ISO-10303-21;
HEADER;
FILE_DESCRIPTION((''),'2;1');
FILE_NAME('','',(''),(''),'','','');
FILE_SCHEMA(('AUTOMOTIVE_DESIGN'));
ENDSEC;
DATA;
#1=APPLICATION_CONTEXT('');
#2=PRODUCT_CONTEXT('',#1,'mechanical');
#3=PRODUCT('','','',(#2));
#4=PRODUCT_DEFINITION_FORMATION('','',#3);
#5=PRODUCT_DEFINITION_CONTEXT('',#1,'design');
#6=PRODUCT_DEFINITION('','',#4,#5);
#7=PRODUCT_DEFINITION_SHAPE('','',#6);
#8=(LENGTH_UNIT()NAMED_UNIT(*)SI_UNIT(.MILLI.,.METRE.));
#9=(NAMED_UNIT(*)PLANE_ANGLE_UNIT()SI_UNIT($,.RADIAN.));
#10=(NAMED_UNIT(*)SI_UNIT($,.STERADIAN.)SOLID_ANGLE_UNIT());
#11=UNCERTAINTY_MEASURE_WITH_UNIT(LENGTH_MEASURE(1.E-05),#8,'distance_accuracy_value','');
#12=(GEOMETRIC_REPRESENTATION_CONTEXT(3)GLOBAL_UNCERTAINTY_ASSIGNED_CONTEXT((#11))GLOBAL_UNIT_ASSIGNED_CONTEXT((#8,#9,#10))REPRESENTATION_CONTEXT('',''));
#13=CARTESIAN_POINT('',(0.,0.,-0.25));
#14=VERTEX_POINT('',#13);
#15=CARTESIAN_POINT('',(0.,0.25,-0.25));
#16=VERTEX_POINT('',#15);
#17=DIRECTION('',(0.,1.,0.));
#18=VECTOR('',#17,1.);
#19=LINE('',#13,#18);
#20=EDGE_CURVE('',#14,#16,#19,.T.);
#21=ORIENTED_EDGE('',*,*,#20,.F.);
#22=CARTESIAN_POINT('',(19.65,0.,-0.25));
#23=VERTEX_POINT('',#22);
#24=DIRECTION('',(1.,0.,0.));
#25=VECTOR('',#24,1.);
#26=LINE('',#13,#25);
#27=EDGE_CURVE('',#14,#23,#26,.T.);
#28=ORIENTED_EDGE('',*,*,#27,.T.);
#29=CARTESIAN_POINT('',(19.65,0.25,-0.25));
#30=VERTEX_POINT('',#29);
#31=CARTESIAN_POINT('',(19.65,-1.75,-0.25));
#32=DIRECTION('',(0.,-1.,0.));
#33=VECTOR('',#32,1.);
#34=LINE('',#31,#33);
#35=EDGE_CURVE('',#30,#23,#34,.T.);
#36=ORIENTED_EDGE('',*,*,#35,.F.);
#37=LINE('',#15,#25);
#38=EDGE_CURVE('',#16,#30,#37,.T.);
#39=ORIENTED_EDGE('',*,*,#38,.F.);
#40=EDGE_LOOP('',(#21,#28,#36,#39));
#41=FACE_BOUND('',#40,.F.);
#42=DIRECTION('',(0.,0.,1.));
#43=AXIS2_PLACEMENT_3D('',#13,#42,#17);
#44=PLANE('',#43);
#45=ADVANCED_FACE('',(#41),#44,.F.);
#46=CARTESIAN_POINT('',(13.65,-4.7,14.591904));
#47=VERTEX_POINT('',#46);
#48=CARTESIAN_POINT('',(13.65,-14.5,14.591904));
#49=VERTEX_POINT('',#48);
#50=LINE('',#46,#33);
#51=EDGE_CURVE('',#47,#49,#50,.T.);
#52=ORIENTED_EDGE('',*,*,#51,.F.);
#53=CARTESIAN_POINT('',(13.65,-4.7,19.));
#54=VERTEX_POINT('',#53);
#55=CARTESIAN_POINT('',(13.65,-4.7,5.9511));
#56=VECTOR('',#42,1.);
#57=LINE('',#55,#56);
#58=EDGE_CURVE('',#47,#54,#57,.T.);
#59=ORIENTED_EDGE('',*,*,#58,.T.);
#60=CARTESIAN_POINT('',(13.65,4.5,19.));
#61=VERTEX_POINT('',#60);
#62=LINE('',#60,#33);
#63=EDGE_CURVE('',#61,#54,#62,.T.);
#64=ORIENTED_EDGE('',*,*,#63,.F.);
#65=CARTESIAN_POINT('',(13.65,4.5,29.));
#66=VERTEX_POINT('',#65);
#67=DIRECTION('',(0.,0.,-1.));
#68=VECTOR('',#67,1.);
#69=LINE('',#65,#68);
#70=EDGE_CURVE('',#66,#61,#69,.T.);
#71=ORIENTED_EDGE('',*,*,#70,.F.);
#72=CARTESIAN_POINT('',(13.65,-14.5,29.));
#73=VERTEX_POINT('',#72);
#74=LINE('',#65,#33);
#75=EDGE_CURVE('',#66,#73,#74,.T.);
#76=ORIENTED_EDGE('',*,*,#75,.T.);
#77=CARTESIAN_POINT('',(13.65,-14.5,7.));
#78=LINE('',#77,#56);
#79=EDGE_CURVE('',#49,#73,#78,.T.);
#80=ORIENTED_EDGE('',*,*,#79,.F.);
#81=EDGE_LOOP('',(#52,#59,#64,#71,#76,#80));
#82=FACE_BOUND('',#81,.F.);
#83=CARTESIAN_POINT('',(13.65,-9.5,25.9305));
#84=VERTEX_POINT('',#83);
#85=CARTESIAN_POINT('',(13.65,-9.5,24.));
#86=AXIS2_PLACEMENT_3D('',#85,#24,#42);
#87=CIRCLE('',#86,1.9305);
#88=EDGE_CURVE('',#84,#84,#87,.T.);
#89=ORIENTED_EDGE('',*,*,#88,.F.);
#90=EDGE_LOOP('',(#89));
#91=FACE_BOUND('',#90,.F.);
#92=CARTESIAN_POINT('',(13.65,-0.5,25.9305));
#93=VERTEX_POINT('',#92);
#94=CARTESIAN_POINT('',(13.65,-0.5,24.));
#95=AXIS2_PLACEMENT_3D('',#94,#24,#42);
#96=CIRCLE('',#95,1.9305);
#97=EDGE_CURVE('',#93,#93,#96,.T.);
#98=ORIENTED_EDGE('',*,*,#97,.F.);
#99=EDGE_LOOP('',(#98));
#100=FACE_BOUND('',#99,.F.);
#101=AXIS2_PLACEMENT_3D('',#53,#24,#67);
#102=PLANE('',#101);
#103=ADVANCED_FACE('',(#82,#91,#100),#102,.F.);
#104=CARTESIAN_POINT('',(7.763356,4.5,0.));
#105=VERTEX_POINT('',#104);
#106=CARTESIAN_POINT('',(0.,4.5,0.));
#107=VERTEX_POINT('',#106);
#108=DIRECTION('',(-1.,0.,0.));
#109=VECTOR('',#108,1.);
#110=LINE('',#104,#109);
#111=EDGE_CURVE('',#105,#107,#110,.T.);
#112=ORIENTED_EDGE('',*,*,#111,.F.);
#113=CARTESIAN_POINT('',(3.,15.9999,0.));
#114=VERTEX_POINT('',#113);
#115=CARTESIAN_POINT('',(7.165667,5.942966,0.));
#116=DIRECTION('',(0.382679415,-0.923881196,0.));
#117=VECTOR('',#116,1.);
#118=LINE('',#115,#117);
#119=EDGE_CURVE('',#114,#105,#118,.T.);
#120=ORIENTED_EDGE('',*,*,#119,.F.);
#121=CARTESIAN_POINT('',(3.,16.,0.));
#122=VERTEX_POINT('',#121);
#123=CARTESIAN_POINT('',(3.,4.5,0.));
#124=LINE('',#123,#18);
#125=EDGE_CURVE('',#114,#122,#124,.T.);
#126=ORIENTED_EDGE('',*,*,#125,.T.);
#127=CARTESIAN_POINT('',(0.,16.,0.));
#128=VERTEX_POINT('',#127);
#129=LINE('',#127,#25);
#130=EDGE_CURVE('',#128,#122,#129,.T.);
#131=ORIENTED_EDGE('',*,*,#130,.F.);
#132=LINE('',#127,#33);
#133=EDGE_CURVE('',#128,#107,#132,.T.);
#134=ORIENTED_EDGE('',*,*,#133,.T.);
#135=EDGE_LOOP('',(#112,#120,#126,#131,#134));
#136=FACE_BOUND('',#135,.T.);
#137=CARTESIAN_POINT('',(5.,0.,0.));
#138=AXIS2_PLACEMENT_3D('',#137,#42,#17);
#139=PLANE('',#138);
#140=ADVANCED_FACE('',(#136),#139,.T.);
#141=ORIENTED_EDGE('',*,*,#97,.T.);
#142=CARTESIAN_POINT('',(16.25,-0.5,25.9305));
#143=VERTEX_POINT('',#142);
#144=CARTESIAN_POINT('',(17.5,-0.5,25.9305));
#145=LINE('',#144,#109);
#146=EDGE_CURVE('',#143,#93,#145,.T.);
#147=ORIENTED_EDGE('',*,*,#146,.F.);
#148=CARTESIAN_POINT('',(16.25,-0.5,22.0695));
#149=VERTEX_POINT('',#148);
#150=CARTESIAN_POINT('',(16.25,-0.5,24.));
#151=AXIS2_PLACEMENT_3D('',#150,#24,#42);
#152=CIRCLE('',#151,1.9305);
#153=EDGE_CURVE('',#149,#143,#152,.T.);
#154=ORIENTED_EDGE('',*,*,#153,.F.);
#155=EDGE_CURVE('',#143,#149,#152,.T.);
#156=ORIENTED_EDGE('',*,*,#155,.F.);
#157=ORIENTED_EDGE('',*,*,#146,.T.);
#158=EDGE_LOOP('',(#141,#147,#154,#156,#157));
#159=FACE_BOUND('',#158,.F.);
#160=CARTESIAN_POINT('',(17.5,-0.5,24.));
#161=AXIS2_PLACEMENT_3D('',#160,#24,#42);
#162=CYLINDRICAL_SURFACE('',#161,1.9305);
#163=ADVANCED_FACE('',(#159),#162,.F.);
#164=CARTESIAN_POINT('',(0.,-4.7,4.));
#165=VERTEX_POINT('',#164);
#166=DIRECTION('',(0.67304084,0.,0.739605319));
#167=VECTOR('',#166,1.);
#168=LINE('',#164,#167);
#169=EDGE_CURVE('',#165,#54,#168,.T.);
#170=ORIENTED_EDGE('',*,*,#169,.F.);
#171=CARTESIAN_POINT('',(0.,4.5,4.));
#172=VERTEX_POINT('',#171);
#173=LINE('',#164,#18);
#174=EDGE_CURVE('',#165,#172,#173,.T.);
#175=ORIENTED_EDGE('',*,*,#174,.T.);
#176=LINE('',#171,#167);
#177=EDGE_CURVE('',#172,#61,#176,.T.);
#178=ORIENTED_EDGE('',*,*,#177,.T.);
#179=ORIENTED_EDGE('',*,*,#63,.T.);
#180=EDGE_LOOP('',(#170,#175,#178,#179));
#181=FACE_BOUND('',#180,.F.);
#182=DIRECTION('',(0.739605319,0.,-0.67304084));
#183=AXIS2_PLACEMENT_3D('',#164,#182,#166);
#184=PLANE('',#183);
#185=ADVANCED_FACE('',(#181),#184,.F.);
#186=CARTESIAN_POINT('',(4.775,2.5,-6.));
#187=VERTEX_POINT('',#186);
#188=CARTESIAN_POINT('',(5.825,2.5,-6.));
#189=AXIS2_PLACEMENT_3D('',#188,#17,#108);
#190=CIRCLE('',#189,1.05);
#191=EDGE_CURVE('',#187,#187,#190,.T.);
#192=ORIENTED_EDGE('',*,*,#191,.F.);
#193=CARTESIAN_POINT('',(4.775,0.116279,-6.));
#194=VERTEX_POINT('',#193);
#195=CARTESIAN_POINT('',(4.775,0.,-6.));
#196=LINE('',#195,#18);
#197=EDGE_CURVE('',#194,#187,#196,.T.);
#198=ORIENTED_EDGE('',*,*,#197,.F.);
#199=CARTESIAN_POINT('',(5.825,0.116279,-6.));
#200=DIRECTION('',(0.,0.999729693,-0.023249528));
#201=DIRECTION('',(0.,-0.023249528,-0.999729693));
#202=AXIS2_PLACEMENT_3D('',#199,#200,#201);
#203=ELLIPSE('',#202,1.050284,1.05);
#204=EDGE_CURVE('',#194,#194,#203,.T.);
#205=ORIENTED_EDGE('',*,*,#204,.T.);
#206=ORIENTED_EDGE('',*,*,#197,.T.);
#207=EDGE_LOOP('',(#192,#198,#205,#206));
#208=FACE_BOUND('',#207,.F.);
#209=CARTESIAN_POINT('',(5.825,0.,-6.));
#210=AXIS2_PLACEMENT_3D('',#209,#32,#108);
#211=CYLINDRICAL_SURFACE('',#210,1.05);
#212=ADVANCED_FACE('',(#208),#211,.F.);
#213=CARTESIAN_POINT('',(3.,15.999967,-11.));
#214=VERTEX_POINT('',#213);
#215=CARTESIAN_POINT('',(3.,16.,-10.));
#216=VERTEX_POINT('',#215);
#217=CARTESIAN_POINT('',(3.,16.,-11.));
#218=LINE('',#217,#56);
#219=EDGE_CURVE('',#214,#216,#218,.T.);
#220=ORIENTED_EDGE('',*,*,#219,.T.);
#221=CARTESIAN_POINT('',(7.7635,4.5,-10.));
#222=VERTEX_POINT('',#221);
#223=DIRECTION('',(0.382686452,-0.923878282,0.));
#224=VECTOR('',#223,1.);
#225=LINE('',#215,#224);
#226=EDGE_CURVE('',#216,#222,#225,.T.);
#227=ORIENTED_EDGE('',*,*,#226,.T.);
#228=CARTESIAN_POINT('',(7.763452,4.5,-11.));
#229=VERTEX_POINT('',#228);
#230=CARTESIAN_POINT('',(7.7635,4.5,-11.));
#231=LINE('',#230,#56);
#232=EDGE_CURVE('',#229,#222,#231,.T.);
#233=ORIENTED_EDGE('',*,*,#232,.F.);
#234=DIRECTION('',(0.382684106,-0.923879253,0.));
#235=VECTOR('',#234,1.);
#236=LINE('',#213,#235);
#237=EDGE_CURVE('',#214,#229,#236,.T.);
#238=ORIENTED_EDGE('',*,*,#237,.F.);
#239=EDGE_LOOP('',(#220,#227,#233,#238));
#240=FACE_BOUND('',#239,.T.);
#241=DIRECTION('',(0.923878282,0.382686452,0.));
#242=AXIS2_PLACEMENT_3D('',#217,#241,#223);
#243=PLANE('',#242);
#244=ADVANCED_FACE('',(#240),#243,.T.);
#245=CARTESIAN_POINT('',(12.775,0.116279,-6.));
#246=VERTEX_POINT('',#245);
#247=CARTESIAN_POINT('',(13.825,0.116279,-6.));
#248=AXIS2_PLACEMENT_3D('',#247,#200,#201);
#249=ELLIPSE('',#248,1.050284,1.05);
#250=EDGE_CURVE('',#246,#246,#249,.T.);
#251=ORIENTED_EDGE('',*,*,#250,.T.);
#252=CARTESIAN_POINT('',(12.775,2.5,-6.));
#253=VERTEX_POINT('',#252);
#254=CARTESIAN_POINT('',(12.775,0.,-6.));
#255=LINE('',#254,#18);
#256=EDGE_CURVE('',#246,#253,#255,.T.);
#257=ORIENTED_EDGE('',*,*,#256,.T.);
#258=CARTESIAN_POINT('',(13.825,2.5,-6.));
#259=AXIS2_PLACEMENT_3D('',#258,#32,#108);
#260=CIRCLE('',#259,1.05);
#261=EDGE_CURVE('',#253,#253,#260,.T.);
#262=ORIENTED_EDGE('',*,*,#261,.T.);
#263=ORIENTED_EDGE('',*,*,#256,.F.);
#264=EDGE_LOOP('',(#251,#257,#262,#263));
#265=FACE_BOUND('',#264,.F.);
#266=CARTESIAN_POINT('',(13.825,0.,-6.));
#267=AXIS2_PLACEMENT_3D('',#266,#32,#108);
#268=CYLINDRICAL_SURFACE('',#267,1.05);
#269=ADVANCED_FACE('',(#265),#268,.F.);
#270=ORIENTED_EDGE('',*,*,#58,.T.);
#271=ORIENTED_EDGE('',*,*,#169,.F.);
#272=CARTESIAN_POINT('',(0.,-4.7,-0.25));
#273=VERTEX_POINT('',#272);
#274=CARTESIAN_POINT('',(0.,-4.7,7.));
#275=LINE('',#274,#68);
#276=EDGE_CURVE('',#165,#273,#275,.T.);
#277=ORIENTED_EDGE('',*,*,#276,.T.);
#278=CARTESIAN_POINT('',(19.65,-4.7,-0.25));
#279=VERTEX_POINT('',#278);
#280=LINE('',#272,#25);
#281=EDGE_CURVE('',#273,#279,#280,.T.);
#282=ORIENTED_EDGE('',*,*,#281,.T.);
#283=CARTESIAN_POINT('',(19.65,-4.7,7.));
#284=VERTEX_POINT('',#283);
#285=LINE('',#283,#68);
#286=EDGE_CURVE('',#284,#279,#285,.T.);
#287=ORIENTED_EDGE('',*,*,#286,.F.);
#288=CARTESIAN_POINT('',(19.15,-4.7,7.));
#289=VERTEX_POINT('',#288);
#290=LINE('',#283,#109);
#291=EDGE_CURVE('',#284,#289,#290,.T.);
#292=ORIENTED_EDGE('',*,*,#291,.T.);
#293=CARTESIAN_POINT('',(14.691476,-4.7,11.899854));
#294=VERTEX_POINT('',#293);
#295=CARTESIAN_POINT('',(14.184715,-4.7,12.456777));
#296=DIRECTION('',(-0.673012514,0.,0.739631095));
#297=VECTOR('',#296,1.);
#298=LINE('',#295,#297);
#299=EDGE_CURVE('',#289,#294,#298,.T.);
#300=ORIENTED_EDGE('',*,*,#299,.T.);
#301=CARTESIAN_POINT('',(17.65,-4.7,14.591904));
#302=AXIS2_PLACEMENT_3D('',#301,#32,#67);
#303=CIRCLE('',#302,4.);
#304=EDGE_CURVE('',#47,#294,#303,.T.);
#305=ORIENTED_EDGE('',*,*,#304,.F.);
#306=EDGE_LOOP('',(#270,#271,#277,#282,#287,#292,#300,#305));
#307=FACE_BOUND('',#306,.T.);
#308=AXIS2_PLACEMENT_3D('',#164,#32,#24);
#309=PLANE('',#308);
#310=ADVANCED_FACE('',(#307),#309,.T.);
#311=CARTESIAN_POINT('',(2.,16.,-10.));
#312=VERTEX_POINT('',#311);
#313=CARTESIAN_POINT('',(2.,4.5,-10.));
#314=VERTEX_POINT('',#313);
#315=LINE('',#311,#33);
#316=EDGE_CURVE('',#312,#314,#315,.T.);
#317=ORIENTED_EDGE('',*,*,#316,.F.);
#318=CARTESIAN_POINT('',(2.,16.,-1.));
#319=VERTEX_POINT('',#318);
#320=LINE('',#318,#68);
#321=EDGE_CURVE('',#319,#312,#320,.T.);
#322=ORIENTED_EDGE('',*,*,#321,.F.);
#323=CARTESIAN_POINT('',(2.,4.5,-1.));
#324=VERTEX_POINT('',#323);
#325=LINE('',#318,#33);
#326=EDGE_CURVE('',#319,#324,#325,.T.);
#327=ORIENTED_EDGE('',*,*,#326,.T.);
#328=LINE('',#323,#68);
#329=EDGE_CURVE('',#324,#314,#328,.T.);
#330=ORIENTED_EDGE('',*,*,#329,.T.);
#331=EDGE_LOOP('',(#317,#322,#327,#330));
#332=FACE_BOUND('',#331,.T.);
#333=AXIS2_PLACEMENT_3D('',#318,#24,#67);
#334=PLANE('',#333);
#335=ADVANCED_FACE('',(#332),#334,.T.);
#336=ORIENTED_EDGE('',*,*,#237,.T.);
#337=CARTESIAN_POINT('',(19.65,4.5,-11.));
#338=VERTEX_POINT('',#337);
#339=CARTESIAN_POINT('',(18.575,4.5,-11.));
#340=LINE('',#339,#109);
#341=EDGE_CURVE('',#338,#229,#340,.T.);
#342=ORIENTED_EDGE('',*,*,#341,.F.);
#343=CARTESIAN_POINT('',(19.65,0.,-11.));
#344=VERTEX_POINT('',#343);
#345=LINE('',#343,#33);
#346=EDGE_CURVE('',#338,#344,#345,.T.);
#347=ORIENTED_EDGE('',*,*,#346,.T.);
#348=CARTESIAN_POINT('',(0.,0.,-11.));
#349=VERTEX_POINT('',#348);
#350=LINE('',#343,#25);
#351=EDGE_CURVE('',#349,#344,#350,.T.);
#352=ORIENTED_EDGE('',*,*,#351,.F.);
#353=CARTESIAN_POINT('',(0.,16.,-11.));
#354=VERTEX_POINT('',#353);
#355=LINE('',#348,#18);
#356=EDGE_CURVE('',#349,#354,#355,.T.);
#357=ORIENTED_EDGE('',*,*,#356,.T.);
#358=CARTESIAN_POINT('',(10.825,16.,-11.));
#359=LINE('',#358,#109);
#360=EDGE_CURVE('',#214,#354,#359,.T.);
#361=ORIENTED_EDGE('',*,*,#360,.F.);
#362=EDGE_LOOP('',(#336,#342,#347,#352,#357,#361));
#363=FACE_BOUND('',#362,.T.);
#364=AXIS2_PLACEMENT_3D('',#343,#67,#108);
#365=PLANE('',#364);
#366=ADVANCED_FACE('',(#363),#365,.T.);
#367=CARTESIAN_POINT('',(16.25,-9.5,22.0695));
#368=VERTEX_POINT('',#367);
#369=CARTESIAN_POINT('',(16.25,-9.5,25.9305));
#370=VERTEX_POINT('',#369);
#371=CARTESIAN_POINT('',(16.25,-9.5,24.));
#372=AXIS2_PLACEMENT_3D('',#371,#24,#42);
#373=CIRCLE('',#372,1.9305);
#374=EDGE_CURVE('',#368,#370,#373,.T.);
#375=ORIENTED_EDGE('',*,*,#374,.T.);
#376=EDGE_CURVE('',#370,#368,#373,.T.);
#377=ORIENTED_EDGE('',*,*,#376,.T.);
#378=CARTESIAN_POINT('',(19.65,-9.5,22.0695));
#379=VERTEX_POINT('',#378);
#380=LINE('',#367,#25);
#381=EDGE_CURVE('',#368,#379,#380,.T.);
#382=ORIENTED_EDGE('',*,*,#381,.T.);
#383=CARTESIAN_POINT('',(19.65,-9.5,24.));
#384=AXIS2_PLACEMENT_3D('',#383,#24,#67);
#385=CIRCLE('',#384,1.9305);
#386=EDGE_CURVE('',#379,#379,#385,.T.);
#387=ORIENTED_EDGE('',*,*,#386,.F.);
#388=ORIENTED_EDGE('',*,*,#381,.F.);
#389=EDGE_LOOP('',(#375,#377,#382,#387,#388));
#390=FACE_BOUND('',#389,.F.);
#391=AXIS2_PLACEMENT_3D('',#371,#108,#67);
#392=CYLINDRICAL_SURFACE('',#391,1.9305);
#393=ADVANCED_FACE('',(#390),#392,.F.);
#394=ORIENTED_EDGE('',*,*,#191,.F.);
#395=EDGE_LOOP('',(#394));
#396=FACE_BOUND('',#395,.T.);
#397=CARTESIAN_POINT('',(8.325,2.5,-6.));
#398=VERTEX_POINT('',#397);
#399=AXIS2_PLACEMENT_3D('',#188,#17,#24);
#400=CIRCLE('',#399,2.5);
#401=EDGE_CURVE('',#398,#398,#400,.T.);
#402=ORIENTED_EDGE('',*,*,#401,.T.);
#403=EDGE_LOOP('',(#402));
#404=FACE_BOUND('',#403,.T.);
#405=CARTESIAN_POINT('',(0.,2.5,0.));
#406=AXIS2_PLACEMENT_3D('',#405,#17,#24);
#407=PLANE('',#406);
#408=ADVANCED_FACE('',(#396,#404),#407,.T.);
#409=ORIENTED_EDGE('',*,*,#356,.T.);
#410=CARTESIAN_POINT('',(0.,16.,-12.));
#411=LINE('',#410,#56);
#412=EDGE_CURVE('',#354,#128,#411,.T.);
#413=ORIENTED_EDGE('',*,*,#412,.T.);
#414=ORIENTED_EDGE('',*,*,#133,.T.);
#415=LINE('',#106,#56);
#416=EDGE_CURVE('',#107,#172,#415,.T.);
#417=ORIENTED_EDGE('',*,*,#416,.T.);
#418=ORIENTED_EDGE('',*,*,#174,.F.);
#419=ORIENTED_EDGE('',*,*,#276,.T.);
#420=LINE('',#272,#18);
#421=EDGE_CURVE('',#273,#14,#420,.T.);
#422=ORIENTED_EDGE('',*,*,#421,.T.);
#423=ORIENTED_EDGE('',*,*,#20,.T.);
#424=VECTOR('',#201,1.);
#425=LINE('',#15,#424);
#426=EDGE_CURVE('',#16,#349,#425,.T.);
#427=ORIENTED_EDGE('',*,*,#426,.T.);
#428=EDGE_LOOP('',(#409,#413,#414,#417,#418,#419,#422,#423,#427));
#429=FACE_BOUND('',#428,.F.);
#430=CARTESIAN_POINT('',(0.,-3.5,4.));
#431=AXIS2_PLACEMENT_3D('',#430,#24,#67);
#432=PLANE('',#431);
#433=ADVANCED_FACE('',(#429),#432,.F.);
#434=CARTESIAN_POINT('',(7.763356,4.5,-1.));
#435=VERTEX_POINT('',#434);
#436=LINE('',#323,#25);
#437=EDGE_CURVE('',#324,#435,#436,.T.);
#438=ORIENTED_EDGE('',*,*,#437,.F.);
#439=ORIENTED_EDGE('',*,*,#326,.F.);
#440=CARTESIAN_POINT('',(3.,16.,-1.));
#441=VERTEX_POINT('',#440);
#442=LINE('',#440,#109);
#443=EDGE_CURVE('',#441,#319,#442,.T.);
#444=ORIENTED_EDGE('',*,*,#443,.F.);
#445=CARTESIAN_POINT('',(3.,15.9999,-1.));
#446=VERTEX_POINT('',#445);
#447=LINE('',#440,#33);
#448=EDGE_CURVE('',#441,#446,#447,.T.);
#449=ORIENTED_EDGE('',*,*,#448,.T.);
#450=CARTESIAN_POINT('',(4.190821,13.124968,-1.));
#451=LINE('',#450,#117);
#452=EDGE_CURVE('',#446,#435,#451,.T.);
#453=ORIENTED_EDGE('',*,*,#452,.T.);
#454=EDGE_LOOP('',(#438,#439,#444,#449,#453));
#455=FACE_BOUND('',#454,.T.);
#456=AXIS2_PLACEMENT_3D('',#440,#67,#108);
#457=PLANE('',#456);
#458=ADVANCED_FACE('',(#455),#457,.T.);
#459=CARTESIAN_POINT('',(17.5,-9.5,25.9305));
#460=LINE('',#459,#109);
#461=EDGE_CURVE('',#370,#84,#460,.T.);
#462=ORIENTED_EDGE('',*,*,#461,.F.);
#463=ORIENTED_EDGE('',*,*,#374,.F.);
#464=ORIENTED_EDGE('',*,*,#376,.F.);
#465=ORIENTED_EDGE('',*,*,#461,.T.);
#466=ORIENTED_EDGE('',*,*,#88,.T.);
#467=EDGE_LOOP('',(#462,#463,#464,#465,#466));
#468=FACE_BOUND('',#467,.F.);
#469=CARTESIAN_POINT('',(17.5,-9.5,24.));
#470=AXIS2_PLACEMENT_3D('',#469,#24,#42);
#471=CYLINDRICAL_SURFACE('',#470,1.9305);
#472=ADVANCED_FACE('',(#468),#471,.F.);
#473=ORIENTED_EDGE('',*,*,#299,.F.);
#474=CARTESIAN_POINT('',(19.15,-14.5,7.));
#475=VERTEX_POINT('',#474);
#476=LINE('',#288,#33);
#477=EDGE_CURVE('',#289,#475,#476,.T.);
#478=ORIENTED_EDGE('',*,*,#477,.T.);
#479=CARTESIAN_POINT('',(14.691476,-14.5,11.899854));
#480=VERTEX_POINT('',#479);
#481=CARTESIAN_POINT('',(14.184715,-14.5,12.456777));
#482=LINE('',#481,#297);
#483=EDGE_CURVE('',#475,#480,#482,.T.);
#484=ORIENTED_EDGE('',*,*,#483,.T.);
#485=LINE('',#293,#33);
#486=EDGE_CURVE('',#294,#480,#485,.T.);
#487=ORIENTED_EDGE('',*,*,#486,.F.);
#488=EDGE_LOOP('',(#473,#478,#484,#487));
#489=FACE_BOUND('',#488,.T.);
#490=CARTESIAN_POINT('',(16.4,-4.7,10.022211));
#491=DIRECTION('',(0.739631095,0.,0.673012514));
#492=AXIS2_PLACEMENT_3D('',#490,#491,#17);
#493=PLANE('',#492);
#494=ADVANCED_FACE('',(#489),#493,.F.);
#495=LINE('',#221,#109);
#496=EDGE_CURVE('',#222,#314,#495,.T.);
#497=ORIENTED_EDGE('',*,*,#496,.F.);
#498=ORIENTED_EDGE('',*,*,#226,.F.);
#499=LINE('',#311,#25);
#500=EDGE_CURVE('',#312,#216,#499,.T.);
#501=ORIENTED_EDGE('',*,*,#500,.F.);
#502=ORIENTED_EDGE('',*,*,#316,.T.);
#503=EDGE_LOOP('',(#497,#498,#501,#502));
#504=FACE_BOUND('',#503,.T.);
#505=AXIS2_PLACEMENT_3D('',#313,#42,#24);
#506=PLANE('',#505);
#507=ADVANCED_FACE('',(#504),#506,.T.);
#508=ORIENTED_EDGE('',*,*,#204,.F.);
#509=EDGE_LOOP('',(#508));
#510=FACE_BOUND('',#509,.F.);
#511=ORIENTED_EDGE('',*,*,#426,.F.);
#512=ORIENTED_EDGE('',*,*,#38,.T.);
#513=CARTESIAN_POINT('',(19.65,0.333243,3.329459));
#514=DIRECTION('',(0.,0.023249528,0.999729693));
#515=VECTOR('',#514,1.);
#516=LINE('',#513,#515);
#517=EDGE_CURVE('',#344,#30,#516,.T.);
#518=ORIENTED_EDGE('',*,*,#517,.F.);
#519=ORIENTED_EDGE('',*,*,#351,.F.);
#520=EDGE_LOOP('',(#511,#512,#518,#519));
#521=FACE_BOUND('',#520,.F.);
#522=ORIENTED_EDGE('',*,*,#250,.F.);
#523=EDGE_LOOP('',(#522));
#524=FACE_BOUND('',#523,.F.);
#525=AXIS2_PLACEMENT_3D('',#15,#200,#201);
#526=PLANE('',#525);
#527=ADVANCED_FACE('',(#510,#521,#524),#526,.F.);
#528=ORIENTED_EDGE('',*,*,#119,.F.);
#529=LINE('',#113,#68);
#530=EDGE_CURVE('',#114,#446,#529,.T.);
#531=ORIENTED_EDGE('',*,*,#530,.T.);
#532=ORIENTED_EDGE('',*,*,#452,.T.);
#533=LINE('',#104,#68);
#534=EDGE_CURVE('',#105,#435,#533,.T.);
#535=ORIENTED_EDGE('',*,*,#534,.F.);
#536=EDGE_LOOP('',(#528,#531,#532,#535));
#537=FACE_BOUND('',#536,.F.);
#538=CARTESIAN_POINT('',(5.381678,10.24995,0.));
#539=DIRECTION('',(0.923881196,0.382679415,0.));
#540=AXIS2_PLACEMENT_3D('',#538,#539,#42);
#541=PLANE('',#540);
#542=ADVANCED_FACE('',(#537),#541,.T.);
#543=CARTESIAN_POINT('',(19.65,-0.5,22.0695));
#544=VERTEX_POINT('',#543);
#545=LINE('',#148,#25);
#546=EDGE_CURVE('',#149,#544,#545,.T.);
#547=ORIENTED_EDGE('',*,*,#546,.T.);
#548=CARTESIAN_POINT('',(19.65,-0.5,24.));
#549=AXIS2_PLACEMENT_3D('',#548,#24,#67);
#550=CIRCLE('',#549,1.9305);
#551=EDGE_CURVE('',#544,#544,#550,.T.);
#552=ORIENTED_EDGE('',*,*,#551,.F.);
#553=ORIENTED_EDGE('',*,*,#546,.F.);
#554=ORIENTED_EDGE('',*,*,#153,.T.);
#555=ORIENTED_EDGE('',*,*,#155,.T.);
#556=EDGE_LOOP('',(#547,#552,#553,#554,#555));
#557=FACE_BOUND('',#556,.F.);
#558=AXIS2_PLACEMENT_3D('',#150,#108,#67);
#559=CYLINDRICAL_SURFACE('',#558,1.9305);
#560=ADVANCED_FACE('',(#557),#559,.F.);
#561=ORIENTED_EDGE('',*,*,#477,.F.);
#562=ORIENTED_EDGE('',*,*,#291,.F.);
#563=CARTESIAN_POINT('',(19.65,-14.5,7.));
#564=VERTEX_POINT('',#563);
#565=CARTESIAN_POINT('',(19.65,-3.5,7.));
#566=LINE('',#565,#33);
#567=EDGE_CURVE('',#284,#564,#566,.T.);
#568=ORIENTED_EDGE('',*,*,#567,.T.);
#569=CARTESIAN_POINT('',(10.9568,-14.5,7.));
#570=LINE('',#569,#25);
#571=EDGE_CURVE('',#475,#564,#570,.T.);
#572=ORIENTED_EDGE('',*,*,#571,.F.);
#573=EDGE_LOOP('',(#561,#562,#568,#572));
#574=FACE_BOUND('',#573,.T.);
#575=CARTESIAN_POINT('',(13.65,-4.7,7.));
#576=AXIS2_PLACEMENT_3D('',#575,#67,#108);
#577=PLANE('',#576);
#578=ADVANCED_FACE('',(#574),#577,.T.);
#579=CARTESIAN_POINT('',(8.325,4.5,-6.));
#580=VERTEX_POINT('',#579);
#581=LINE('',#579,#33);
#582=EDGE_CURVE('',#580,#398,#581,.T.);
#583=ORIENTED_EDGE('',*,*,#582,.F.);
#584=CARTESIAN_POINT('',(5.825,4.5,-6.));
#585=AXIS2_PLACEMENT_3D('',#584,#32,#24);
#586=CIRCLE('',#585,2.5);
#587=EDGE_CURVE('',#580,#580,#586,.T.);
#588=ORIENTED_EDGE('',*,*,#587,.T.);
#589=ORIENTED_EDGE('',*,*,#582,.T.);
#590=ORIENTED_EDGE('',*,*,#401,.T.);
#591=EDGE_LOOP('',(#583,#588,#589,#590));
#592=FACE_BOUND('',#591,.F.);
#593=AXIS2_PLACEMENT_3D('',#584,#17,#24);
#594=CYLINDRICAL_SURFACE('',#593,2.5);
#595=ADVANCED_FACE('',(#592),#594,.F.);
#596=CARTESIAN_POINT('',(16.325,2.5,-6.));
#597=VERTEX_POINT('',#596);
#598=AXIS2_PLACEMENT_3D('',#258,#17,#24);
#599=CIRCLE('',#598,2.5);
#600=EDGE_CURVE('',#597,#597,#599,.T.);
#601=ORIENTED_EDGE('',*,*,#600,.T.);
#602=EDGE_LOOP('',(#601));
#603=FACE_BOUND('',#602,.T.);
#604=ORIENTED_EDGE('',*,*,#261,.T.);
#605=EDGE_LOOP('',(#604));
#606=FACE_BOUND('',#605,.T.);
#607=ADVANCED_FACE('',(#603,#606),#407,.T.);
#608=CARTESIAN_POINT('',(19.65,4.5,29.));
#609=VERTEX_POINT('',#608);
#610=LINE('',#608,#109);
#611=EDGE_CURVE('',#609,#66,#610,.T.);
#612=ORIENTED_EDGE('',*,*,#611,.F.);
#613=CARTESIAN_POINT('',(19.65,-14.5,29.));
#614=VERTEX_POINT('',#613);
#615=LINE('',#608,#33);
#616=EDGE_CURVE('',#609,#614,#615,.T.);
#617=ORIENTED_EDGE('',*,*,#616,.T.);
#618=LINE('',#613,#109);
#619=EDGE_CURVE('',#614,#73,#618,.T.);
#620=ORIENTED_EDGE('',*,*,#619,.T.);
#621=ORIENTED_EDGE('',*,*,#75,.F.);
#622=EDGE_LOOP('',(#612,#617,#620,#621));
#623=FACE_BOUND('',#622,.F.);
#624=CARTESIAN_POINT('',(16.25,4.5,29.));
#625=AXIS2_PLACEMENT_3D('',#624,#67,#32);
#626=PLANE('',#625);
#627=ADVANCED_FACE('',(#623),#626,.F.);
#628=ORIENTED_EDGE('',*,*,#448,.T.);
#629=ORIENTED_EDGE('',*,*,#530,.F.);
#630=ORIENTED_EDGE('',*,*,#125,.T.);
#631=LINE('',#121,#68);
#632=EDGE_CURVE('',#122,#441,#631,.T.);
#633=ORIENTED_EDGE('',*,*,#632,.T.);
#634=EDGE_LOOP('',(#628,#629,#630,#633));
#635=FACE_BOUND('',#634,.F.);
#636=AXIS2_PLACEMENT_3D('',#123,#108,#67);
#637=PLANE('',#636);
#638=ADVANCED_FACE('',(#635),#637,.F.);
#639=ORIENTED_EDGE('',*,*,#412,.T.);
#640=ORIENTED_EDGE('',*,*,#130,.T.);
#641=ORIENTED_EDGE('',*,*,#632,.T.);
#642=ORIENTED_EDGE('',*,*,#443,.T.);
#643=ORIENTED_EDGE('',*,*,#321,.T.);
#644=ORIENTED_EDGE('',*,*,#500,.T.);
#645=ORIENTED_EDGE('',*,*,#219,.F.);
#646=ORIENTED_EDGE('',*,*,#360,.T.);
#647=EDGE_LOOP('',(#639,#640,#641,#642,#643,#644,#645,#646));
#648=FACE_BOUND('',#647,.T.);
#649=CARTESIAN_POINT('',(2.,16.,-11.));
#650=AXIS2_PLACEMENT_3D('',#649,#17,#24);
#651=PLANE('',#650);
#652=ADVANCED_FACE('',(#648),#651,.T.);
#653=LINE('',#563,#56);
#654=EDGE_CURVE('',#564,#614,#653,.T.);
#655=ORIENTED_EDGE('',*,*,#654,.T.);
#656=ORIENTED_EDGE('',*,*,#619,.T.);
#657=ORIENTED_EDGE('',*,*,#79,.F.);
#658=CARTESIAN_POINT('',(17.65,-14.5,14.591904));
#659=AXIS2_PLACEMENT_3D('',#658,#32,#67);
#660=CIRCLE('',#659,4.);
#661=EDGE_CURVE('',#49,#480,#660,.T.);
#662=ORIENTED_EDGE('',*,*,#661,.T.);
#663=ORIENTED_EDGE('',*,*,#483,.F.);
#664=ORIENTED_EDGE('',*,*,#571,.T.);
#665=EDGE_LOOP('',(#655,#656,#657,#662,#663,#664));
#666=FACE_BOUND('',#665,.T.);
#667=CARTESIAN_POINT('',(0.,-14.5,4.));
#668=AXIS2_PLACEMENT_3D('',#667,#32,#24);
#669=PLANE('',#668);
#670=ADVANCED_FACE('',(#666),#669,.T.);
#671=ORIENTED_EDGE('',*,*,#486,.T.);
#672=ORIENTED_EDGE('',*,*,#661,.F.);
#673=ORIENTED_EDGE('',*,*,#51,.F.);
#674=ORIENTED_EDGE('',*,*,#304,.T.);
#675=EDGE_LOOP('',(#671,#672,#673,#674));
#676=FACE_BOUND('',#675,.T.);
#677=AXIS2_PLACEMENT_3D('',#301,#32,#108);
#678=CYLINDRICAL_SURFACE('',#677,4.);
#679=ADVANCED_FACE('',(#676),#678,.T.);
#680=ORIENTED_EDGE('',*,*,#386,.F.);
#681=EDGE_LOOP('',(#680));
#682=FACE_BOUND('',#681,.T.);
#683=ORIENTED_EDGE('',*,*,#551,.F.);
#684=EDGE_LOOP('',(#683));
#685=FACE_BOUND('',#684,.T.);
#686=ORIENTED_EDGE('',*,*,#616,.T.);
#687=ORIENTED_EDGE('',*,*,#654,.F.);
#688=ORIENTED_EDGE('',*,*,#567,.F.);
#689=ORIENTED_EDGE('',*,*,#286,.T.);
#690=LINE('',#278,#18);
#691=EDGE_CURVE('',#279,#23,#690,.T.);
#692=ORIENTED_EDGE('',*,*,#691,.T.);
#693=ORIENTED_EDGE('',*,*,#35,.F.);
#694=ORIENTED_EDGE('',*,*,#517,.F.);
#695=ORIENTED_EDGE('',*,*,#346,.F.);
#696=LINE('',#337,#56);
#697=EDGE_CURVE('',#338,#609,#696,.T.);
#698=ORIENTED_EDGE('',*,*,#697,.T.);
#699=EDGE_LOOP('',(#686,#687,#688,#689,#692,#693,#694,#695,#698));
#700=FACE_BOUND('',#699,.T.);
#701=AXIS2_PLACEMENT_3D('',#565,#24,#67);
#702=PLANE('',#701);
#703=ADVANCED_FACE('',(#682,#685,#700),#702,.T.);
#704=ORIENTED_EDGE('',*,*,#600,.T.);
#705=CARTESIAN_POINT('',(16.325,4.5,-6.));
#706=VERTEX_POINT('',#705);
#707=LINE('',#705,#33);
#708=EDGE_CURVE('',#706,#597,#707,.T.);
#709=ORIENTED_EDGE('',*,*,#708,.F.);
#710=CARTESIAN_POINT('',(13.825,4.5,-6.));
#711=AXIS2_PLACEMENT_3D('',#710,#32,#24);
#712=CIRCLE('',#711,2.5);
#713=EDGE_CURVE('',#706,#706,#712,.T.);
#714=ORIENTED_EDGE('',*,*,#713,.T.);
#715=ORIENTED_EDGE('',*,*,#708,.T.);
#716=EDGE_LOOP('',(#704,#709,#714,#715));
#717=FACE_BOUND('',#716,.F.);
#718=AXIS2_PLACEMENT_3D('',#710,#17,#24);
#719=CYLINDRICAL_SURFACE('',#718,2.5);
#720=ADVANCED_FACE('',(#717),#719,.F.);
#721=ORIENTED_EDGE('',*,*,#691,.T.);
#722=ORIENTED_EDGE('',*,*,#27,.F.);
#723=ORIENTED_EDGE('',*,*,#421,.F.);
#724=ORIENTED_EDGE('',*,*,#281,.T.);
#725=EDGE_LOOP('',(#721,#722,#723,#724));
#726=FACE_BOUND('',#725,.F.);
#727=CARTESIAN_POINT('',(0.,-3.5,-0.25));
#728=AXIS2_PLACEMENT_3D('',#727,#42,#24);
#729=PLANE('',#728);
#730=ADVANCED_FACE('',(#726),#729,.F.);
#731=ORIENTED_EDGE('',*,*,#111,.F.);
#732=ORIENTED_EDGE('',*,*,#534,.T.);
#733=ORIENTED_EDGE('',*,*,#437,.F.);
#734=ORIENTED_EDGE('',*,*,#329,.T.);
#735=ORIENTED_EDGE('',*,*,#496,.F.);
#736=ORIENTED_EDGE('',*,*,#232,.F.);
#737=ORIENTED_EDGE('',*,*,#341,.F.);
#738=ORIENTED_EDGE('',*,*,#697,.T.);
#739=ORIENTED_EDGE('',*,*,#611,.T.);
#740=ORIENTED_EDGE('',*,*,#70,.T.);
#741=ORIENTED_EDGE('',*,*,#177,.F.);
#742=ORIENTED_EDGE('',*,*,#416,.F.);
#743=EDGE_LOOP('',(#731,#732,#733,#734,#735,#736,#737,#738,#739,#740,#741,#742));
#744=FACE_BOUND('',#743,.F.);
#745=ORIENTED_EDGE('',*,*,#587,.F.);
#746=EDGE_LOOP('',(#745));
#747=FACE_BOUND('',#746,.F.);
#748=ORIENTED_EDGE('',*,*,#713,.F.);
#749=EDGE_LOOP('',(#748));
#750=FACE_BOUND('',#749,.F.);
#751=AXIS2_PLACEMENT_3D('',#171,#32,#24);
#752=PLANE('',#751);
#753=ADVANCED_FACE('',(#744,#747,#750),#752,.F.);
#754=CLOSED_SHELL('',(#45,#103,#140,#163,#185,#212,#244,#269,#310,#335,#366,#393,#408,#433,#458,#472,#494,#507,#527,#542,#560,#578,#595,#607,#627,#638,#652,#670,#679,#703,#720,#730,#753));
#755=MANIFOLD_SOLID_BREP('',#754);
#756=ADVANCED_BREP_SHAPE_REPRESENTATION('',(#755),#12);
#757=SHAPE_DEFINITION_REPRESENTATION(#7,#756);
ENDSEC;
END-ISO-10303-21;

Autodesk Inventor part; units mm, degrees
ref_plane "YZ Plane" through (0, 0, 0) normal (1, 0, 0) x (0, 1, 0)
ref_plane "XZ Plane" through (0, 0, 0) normal (0, 1, 0) x (-1, 0, 0)
ref_plane "XY Plane" through (0, 0, 0) normal (0, 0, 1) x (1, 0, 0)
sketch "Sketch1" plane through (0, 0, 0) normal (0, 1, 0) x (-1, 0, 0)
  line L0 (0, 0) -> (-19.65, 0)
  line L1 (-19.65, 0) -> (-19.65, -12)
  line L2 (-19.65, -12) -> (0, -12)
  line L3 (0, -12) -> (0, 0)
  line L4 (0, 0) -> (0, -6)
  line L5 (0, -6) -> (-5.825, -6)
  line L6 (-5.825, -6) -> (-13.825, -6)
  circle A0 centre (-5.825, -6) radius 1.05
  circle A1 centre (-13.825, -6) radius 1.05
  dimension "d0" = 19.65
  dimension "d1" = 12
  dimension "d2" = 6
  dimension "d3" = 5.825
  dimension "d4" = 8
  dimension "d5" = 2.1
  dimension "d6" = 2.1
extrude "Extrusion1" add sketch "Sketch1" along normal blind 4.5
sketch "Sketch2" plane through (0, 4.5, 0) normal (0, 1, 0) x (1, 0, 0)
  line L0 (0, 0) -> (19.65, 0) projected
  line L1 (0, 0) -> (0, 6)
  line L2 (0, 12) -> (0, 0) projected
  line L3 (0, 6) -> (5.825, 6)
  line L4 (5.825, 6) -> (13.825, 6)
  circle A0 centre (5.825, 6) radius 2.5
  circle A1 centre (13.825, 6) radius 2.5
  dimension "d9" = 5.825
  dimension "d10" = 8
  dimension "d11" = 5
  dimension "d12" = 5
extrude "Extrusion2" cut sketch "Sketch2" against normal blind 2
sketch "Sketch3" plane through (0, 4.5, 0) normal (0, 1, 0) x (1, 0, 0)
  line L0 (19.65, 12) -> (0, 12) projected
  line L1 (0, 0) -> (3, 0)
  line L2 (3, 0) -> (3, 12)
  line L3 (3, 12) -> (0, 12)
  line L4 (0, 12) -> (0, 0)
  dimension "d15" = 3
extrude "Extrusion3" add sketch "Sketch3" along normal blind 11.5
sketch "Sketch4" plane through (0, 16, 0) normal (0, 1, 0) x (1, 0, 0)
  line L0 (0, 0) -> (3, 0) projected
  line L1 (0, 0) -> (3, 0)
  line L2 (3, 0) -> (3, 1)
  line L3 (3, 0) -> (3, 12) projected
  line L4 (3, 1) -> (2, 1)
  line L5 (2, 1) -> (2, 11)
  line L6 (2, 11) -> (3, 11)
  line L7 (3, 1) -> (3, 11)
  dimension "d18" = 1
  dimension "d19" = 1
  dimension "d20" = 10
extrude "Extrusion4" cut sketch "Sketch4" against normal blind 11.5
sketch "Sketch6" plane through (0, 0, 0) normal (0, 0, 1) x (1, 0, 0)
  line L0 (0, 0) -> (19.65, 0) projected
  line L1 (0, 0) -> (5, 0)
  line L2 (5, 0) -> (5, 4.5)
  line L3 (3.325, 4.5) -> (8.325, 4.5) projected
  line L4 (19.65, 0) -> (19.65, 4.5) projected
  line L5 (19.65, 4.5) -> (19.65, 0)
  line L6 (19.65, 0) -> (5, 0)
  line L7 (5, 4.5) -> (19.65, 4.5)
  line L8 (19.65, 0) -> (5, 0)
  line L9 (19.65, 4.5) -> (19.65, -3.5)
  line L10 (5, 4.5) -> (-3, 4.5)
  line L11 (3, 4.5) -> (19.65, 4.5) projected
  line L12 (5, 4.5) -> (5, -3.5)
  line L13 (5, -3.5) -> (19.65, -3.5)
  dimension "d24" = 5
  dimension "d25" = 8
  dimension "d26" = 8
  dimension "d27" = 8
extrude "Extrusion5" add sketch "Sketch6" along normal blind 2
sketch "Sketch7" plane through (0, 0, 2) normal (0, 0, 1) x (1, 0, 0)
  line L0 (5, 0) -> (5, -3.5) projected
  line L1 (5, -3.5) -> (11, -3.5)
  line L2 (11, -3.5) -> (11, 4.5)
  line L3 (11, 4.5) -> (5, 4.5)
  line L4 (5, 4.5) -> (5, -3.5)
  line L5 (5, -3.5) -> (19.65, -3.5) projected
  line L6 (5, -3.5) -> (11, -3.5)
  line L7 (11, -3.5) -> (11, -14.5)
  line L8 (11, -14.5) -> (5, -14.5)
  line L9 (5, -14.5) -> (5, -3.5)
  point P0 (0, 0)
  dimension "d30" = 6
  dimension "d31" = 8
  dimension "d32" = 6
  dimension "d33" = 11
extrude "Extrusion6" add sketch "Sketch7" along normal blind 27
sketch "Sketch8" plane through (11, -14.5, 2) normal (1, 0, 0) x (0, 0, -1)
  line L0 (0, 11) -> (0, 0) projected
  line L1 (0, 0) -> (-27, 0)
  line L2 (0, 0) -> (-27, 0) projected
  line L3 (-27, 0) -> (-27, 5)
  line L4 (2, 19) -> (-27, 19) projected
  circle A0 centre (-27, 5) radius 2
  line L5 (0, 19) -> (-27, 19)
  line L6 (-27, 19) -> (-27, 14)
  circle A1 centre (-27, 14) radius 2
  line L7 (-27, 14) -> (-22, 14)
  line L8 (-27, 5) -> (-22, 5)
  circle A2 centre (-22, 14) radius 1.9305
  circle A3 centre (-22, 5) radius 1.9305
  point P0 (2, 14.5)
  point P1 (-25, 14)
  point P2 (-27, 16)
  point P3 (-25, 5)
  point P4 (-27, 3)
  dimension "d36" = 27
  dimension "d37" = 5
  dimension "d39" = 4
  dimension "d41" = 27
  dimension "d42" = 5
  dimension "d43" = 4
  dimension "d44" = 5
  dimension "d45" = 5
  dimension "d46" = 3.861
  dimension "d47" = 3.861
sketch "Sketch10" plane through (11, -14.5, 2) normal (1, 0, 0) x (0, 0, -1)
  line L0 (0, 0) -> (-27, 0) projected
  line L1 (0, 0) -> (-5, 0)
  line L2 (-5, 0) -> (-5, 11)
  line L3 (-5, 11) -> (0, 11)
  line L4 (0, 11) -> (0, 0)
  point P0 (2, 14.5)
  point P1 (-5, 0)
  dimension "d52" = 5
  dimension "d53" = 11
extrude "Extrusion9" cut sketch "Sketch10" against normal blind 20
sketch "Sketch11" plane through (11, -3.5, 2) normal (1, 0, 0) x (0, 0, -1)
  line L0 (-27, 8) -> (0, 8)
  line L1 (0, 8) -> (0, -11)
  line L2 (0, -11) -> (-27, -11)
  line L3 (-27, -11) -> (-27, 8)
  line L4 (-5, 0) -> (0, 0) projected
  line L5 (-5, 0) -> (0, 0)
  line L6 (0, 0) -> (0, -11)
  line L7 (0, -11) -> (-5, -11)
  line L8 (-5, -11) -> (-5, 0)
  point P0 (2, 3.5)
  dimension "d56" = 27
  dimension "d57" = 19
extrude "Extrusion10" add sketch "Sketch11" along normal blind 16 contours L0 L1 L4 L8 L2 L3
sketch "Sketch13" plane through (5, -3.5, 0) normal (-1, 0, 0) x (0, 0, 1)
  line L0 (0, 3.5) -> (0, 8) projected
  line L1 (0, 8) -> (30.196, 8)
  line L2 (30.196, 8) -> (30.196, -11.8084)
  line L3 (30.196, -11.8084) -> (0, -11.8084)
  line L4 (0, -11.8084) -> (0, 8)
extrude "Extrusion12" cut sketch "Sketch13" against normal blind 12.5
extrude "Extrusion13" cut sketch "Sketch8" along normal blind 30 contours A2 | A3
sketch "Sketch14" plane through (0, 0, -12) normal (-1, 0, 0) x (0, 0, 1)
  line L0 (12, 4.5) -> (12, 16) projected
  line L1 (12, 4.5) -> (16, 4.5)
  line L2 (14, 4.5) -> (41, 4.5) projected
  line L3 (12, 4.5) -> (12, 0) projected
  line L4 (16, 4.5) -> (12, 4.5)
  line L5 (12, 4.5) -> (12, 0)
  line L6 (12, 0) -> (16, 0)
  line L7 (16, 0) -> (16, 4.5)
  line L8 (16, 0) -> (12, 0)
  line L9 (12, 0) -> (12, -3.5)
  line L10 (12, -3.5) -> (16, -3.5)
  line L11 (16, -3.5) -> (16, 0)
  dimension "d68" = 4
  dimension "d69" = 3.5
extrude "Extrusion14" add sketch "Sketch14" against normal blind 27
sketch "Sketch15" plane through (27, -3.5, 2) normal (1, 0, 0) x (0, 0, -1)
  line L0 (-27.7224, 9.1153) -> (2, 9.1153)
  line L1 (2, 9.1153) -> (2, -11.9629)
  line L2 (2, -11.9629) -> (-27.7224, -11.9629)
  line L3 (-27.7224, -11.9629) -> (-27.7224, 9.1153)
  point P0 (2, 3.5)
extrude "Extrusion15" cut sketch "Sketch15" against normal blind 3.5
sketch "Sketch16" plane through (0, 0, 0) normal (0, 0, -1) x (-1, 0, 0)
  line L0 (-23.5, 4.5) -> (-23.5, -3.5) projected
  line L1 (-19.65, 0) -> (0, 0) projected
  line L2 (-23.5, 4.5) -> (-19.65, 4.5)
  line L3 (-19.65, 4.5) -> (-19.65, 0)
  line L4 (-19.65, 0) -> (-23.5, 0)
  line L5 (-23.5, 0) -> (-23.5, 4.5)
  line L6 (0, -3.5) -> (-23.5, -3.5) projected
  line L7 (-23.5, -3.5) -> (0, -3.5)
  line L8 (0, -3.5) -> (0, 0)
  line L9 (0, 0) -> (-23.5, 0)
  line L10 (-23.5, 0) -> (-23.5, -3.5)
extrude "Extrusion16" cut sketch "Sketch16" against normal blind 0.25
chamfer "Chamfer2" distance 11.5 angle 22.5 1 edges at (3, 4.5, -0.5) measured on face at (3, 8.3333, -0.6667)
chamfer "Chamfer3" distance 11.5 angle 22.5 1 edges at (3, 4.5, -11.5) measured on face at (3, 8.3333, -11.3333)
sketch "Sketch17" plane through (17.5, -3.5, 0) normal (-1, 0, 0) x (0, 0, 1)
  line L0 (4, 8) -> (0, 8) projected
  line L1 (4, 8) -> (29, 8) projected
  line L2 (4, 8) -> (29, 8)
  line L3 (29, -11) -> (7, -11) projected
  line L4 (29, 8) -> (29, -11)
  line L5 (29, -11) -> (7, -11)
  line L6 (7, -11) -> (7, 0) projected
  line L7 (7, -11) -> (7, 0)
  line L8 (7, 0) -> (4, 0) projected
  line L9 (7, 0) -> (4, 0)
  line L10 (4, 0) -> (4, 8) projected
  line L11 (4, 0) -> (4, 8)
  circle A0 centre (24, 3) radius 1.9305 projected
  circle A1 centre (24, 3) radius 1.9305
  circle A2 centre (24, -6) radius 1.9305 projected
  circle A3 centre (24, -6) radius 1.9305
  point P0 (0, 3.5)
extrude "Extrusion17" add sketch "Sketch17" along normal blind 7.75
sketch "Sketch19" plane through (19.65, 0, -12) normal (1, 0, 0) x (0, 0, -1)
  line L0 (3.0047, 17.6779) -> (-43.6886, 17.6779)
  line L1 (-43.6886, 17.6779) -> (-43.6886, -24.1526)
  line L2 (-43.6886, -24.1526) -> (3.0047, -24.1526)
  line L3 (3.0047, -24.1526) -> (3.0047, 17.6779)
  point P0 (-12, 0)
extrude "Extrusion18" cut sketch "Sketch19" along normal blind 7.75
sketch "Sketch20" plane through (19.65, 0, -12) normal (1, 0, 0) x (0, 0, -1)
  line L0 (-16, -3.5) -> (-19, -3.5) projected
  line L1 (-41, 4.5) -> (-16, 4.5) projected
  line L2 (-16, -3.5) -> (-41, -3.5)
  line L3 (-41, -3.5) -> (-41, 4.5)
  line L4 (-41, 4.5) -> (-16, 4.5)
  line L5 (-16, 4.5) -> (-16, -3.5)
  line L6 (-19, -3.5) -> (-19, -14.5) projected
  line L7 (0, 4.5) -> (-41, 4.5) projected
  line L8 (-19, -14.5) -> (-41, -14.5)
  line L9 (-41, -14.5) -> (-41, 4.5)
  line L10 (-41, 4.5) -> (-19, 4.5)
  line L11 (-19, 4.5) -> (-19, -14.5)
  point P0 (-12, 0)
extrude "Extrusion19" cut sketch "Sketch20" against normal blind 3.4
sketch "Sketch22" plane through (9.75, -3.5, 0) normal (-1, 0, 0) x (0, 0, 1)
  line L0 (29, 8) -> (4, 8) projected
  line L1 (29, -11) -> (29, 8) projected
  line L2 (4, 8) -> (29, 8)
  line L3 (29, 8) -> (29, -11)
  line L4 (29, -11) -> (4, -11)
  line L5 (4, -11) -> (4, 8)
  point P0 (0, 3.5)
extrude "Extrusion21" cut sketch "Sketch22" against normal blind 0.5
chamfer "Chamfer6" distance 6 angle 45 1 edges at (10.25, 0.5, 4)
sketch "Sketch23" plane through (10.25, -3.5, 0) normal (-1, 0, 0) x (0, 0, 1)
  line L0 (0.25, 0) -> (4, 0) projected
  line L1 (29, -11) -> (0.25, -11)
  line L2 (0.25, -11) -> (0.25, 0)
  line L3 (0.25, 0) -> (29, 0)
  line L4 (29, 0) -> (29, -11)
  point P0 (0, 3.5)
extrude "Extrusion22" cut sketch "Sketch23" along normal blind 6
chamfer "Chamfer7" distance 3 angle 45 1 edges at (10.25, -9, 7)
sketch "Sketch24" plane through (2, 4.5, -11) normal (0, 0, 1) x (1, 0, 0)
  line L0 (0, 11.5) -> (0, 0) projected
  line L1 (0, 11.5) -> (1, 11.5) projected
  line L2 (0, 11.5) -> (1, 11.5)
  line L3 (1, 11.5) -> (5.7635, 0) projected
  line L4 (1, 11.5) -> (5.7635, 0)
  line L5 (5.7635, 0) -> (0, 0)
  line L6 (0, 0) -> (0, 11.5)
  point P0 (-2, -4.5)
extrude "Extrusion23" add sketch "Sketch24" along normal blind 1
sketch "Sketch25" plane through (19.65, 0, -12) normal (0, 0, -1) x (-1, 0, 0)
  line L0 (11.8865, 4.5) -> (16.65, 16) projected
  line L1 (11.8865, 4.5) -> (21.5602, 4.5)
  line L2 (21.5602, 4.5) -> (21.5602, 16.6717)
  line L3 (21.5602, 16.6717) -> (11.8865, 16.6717)
  line L4 (11.8865, 16.6717) -> (11.8865, 4.5)
  point P0 (19.65, 0)
extrude "Extrusion24" cut sketch "Sketch25" against normal blind 1
sketch "Sketch26" plane through (19.65, 0, -12) normal (0, 0, -1) x (-1, 0, 0)
  line L0 (23.0227, -5.5896) -> (-3.5888, -5.5896)
  line L1 (-3.5888, -5.5896) -> (-3.5888, 1.5983)
  line L2 (23.0227, 1.5983) -> (23.0227, -5.5896)
  line L3 (23.0227, -5.5896) -> (-3.178, -5.5896)
  line L4 (-3.178, -5.5896) -> (-3.178, 11.4907)
  line L5 (-3.178, 11.4907) -> (23.0227, 11.4907)
  line L6 (23.0227, 11.4907) -> (23.0227, -5.5896)
  point P0 (19.65, 0)
extrude "Extrusion25" cut sketch "Sketch26" against normal blind 1
sketch "Sketch27" plane through (0, 0, 0.25) normal (0, 0, -1) x (-1, 0, 0)
  line L0 (-19.65, 0) -> (0, 0) projected
  line L1 (-19.65, -3.5) -> (-16.25, -3.5) projected
  line L2 (0, 0) -> (-19.65, 0)
  line L3 (-19.65, 0) -> (-19.65, -3.5)
  line L4 (-19.65, -3.5) -> (0, -3.5)
  line L5 (0, -3.5) -> (0, 0)
extrude "Extrusion26" add sketch "Sketch27" along normal blind 0.25
sketch "Sketch28" plane through (0, 0, 0) normal (0, 0, -1) x (-1, 0, 0)
  line L0 (0, 0) -> (-19.65, 0) projected
  line L1 (-19.65, 0) -> (-19.65, -3.5) projected
  line L2 (0, 0) -> (-19.65, 0)
  line L3 (-19.65, 0) -> (-19.65, -3.5)
  line L4 (-19.65, -3.5) -> (0, -3.5)
  line L5 (0, -3.5) -> (0, 0)
extrude "Extrusion27" add sketch "Sketch28" along normal blind 0.25
sketch "Sketch29" plane through (16.25, 0, -12) normal (1, 0, 0) x (0, 0, -1)
  line L0 (-16, -3.5) -> (-16, 4.5) projected
  line L1 (-19, -14.5) -> (-41, -14.5) projected
  line L2 (-16, 4.5) -> (-41, 4.5)
  line L3 (-41, 4.5) -> (-41, -14.5)
  line L4 (-41, -14.5) -> (-16, -14.5)
  line L5 (-16, -14.5) -> (-16, 4.5)
  line L6 (-19, -3.5) -> (-19, -14.5) projected
  line L7 (-19, -3.5) -> (-16, -3.5)
  line L8 (-16, -3.5) -> (-16, -14.5)
  line L9 (-16, -14.5) -> (-19, -14.5)
  line L10 (-19, -14.5) -> (-19, -3.5)
  circle A0 centre (-36, -0.5) radius 1.9305 projected
  circle A1 centre (-36, -0.5) radius 1.9305
  circle A2 centre (-36, -9.5) radius 1.9305 projected
  circle A3 centre (-36, -9.5) radius 1.9305
  point P0 (-12, 0)
extrude "Extrusion28" add sketch "Sketch29" along normal blind 3.4 contours L7 L6 L1 L3 L2 L0
sketch "Sketch30" plane through (0, -3.5, 4) normal (0, -1, 0) x (1, 0, 0)
  line L0 (19.65, 3) -> (19.65, -4.25) projected
  line L1 (0, -15) -> (0, -4.25) projected
  line L2 (0, 3) -> (0, -4.25)
  line L3 (0, -4.25) -> (19.65, -4.25)
  line L4 (19.65, -4.25) -> (19.65, 3)
  line L5 (10.25, 6) -> (13.25, 3) projected
  line L6 (13.25, 3) -> (10.25, 6)
  line L7 (10.25, 6) -> (7.25, 3)
  line L8 (10.25, 6) -> (4.25, 0) projected
  line L9 (0, 0) -> (4.25, 0) projected
  line L10 (7.25, 3) -> (4.25, 0)
  line L11 (19.65, 3) -> (13.25, 3)
  line L12 (7.25, 3) -> (0, 3)
  point P0 (0, -4)
extrude "Extrusion29" add sketch "Sketch30" along normal blind 1.2 contours L0 L3 L2 L9 L8 L7 L5 L11
sketch "Sketch31" plane through (10.25, -3.5, 0) normal (-1, 0, 0) x (0, 0, 1)
  line L0 (29, 8) -> (29, -11) projected
  line L1 (29, -11) -> (10, -11) projected
  line L2 (29, 8) -> (19, 8)
  line L3 (19, 8) -> (19, -11)
  line L4 (19, -11) -> (29, -11)
  line L5 (29, -11) -> (29, 8)
  point P0 (0, 3.5)
  dimension "d126" = 10
extrude "Extrusion30" cut sketch "Sketch31" against normal blind 3.4
sketch "Sketch32" plane through (0, 4.5, 0) normal (0, 1, 0) x (1, 0, 0)
  line L0 (13.65, -19) -> (10.25, -19) projected
  line L1 (10.25, -19) -> (10.25, -10) projected
  line L2 (13.65, -19) -> (10.25, -10)
  line L3 (10.25, -10) -> (7.9334, -20.7068)
  line L4 (7.9334, -20.7068) -> (13.65, -19)
  point P0 (0, 0)
extrude "Extrusion31" cut sketch "Sketch32" against normal blind 20 contours L0 L1 L2
sketch "Sketch38" plane through (0, -4.7, 4) normal (0, -1, 0) x (1, 0, 0)
  line L0 (13.65, 15) -> (13.65, 3)
  line L1 (13.25, 3) -> (19.65, 3) projected
  line L2 (13.65, 3) -> (6.6933, 3)
  line L3 (10.25, 6) -> (13.65, 15) projected
  line L4 (6.6933, 3) -> (13.65, 15)
  point P0 (0, -4)
extrude "Extrusion35" cut sketch "Sketch38" along normal blind 20
sketch "Sketch39" plane through (0, -4.7, 4) normal (0, -1, 0) x (1, 0, 0)
  line L0 (10.25, 6) -> (13.65, 15) projected
  line L1 (10.25, 6) -> (10.9568, 7.8709)
  line L2 (10.9568, 7.8709) -> (13.65, 7.8709)
  line L3 (13.65, 3) -> (13.65, 15) projected
  line L4 (13.65, 3) -> (10.9568, 3)
  line L5 (10.9568, 3) -> (10.9568, 7.8709)
  line L6 (10.9568, 7.8709) -> (13.65, 7.8709)
  line L7 (13.65, 7.8709) -> (13.65, 3)
  point P0 (0, -4)
  dimension "d150" = 2
extrude "Extrusion36" add sketch "Sketch39" along normal blind 9.8 contours L2 L3 L4 L5
sketch "Sketch40" plane through (0, -4.7, 4) normal (0, -1, 0) x (1, 0, 0)
  line L0 (10.25, 6) -> (10.9568, 7.8709) projected
  line L1 (13.65, 25) -> (13.65, 7.8709) projected
  line L2 (10.9568, 7.8709) -> (13.65, 7.8709)
  line L3 (13.65, 15) -> (13.65, 25) projected
  line L4 (13.65, 7.8709) -> (13.65, 15)
  line L5 (10.9568, 7.8709) -> (13.65, 15) projected
  line L6 (13.65, 15) -> (10.9568, 7.8709)
  point P0 (0, -4)
extrude "Extrusion37" add sketch "Sketch40" along normal blind 9.8
sketch "Sketch42" plane through (0, -4.7, 4) normal (0, -1, 0) x (1, 0, 0)
  line L0 (4.25, 0) -> (0, 0) projected
  line L1 (10.25, 6) -> (13.65, 15) projected
  line L2 (0, 0) -> (13.65, 15)
  line L3 (13.65, 15) -> (13.65, 4.5)
  line L4 (13.65, 4.5) -> (6.0124, 0)
  line L5 (0, 0) -> (4.25, 0) projected
  line L6 (6.0124, 0) -> (0, 0)
  point P0 (0, -4)
extrude "Extrusion38" add sketch "Sketch42" against normal blind 9.2
sketch "Sketch45" plane through (19.65, -14.5, 7) normal (0, -1, 0) x (1, 0, 0)
  line L0 (-6, 12) -> (-19.65, -3) projected
  line L1 (-6, 12) -> (-11.8966, 12)
  line L2 (-11.8966, 12) -> (-11.8966, -1.0489)
  line L3 (-11.8966, -1.0489) -> (-6, -1.0489)
  line L4 (-6, -1.0489) -> (-6, 12)
  point P0 (-19.65, -7)
  point P1 (-11.8966, 5.5202)
extrude "Extrusion40" cut sketch "Sketch45" against normal blind 9.8 contours L4 L3 L2 L0
chamfer "Chamfer12" distance 5.5 angle 47.7 1 edges at (13.65, -9.6, 7) measured on face at (17.65, -11.2333, 7)
fillet "Fillet6" radius 4 1 edges at (13.65, -9.6, 13.0444)
sketch "Sketch46" plane through (0, 4.5, 0) normal (-1, 0, 0) x (0, 0, 1)
  line L0 (-11, -4.5) -> (-0.25, -4.5) projected
  line L1 (-0.25, -4.5) -> (-0.25, -4.25)
  line L2 (-0.25, -4.25) -> (-11, -4.5)
  line L3 (-11, -4.5) -> (-0.25, -4.5)
  line L4 (-0.25, -4.25) -> (-0.25, -4.5)
  point P0 (0, -4.5)
  dimension "d171" = 0.25
extrude "Extrusion41" cut sketch "Sketch46" against normal blind 50
properties part number "Finger_mount2"
